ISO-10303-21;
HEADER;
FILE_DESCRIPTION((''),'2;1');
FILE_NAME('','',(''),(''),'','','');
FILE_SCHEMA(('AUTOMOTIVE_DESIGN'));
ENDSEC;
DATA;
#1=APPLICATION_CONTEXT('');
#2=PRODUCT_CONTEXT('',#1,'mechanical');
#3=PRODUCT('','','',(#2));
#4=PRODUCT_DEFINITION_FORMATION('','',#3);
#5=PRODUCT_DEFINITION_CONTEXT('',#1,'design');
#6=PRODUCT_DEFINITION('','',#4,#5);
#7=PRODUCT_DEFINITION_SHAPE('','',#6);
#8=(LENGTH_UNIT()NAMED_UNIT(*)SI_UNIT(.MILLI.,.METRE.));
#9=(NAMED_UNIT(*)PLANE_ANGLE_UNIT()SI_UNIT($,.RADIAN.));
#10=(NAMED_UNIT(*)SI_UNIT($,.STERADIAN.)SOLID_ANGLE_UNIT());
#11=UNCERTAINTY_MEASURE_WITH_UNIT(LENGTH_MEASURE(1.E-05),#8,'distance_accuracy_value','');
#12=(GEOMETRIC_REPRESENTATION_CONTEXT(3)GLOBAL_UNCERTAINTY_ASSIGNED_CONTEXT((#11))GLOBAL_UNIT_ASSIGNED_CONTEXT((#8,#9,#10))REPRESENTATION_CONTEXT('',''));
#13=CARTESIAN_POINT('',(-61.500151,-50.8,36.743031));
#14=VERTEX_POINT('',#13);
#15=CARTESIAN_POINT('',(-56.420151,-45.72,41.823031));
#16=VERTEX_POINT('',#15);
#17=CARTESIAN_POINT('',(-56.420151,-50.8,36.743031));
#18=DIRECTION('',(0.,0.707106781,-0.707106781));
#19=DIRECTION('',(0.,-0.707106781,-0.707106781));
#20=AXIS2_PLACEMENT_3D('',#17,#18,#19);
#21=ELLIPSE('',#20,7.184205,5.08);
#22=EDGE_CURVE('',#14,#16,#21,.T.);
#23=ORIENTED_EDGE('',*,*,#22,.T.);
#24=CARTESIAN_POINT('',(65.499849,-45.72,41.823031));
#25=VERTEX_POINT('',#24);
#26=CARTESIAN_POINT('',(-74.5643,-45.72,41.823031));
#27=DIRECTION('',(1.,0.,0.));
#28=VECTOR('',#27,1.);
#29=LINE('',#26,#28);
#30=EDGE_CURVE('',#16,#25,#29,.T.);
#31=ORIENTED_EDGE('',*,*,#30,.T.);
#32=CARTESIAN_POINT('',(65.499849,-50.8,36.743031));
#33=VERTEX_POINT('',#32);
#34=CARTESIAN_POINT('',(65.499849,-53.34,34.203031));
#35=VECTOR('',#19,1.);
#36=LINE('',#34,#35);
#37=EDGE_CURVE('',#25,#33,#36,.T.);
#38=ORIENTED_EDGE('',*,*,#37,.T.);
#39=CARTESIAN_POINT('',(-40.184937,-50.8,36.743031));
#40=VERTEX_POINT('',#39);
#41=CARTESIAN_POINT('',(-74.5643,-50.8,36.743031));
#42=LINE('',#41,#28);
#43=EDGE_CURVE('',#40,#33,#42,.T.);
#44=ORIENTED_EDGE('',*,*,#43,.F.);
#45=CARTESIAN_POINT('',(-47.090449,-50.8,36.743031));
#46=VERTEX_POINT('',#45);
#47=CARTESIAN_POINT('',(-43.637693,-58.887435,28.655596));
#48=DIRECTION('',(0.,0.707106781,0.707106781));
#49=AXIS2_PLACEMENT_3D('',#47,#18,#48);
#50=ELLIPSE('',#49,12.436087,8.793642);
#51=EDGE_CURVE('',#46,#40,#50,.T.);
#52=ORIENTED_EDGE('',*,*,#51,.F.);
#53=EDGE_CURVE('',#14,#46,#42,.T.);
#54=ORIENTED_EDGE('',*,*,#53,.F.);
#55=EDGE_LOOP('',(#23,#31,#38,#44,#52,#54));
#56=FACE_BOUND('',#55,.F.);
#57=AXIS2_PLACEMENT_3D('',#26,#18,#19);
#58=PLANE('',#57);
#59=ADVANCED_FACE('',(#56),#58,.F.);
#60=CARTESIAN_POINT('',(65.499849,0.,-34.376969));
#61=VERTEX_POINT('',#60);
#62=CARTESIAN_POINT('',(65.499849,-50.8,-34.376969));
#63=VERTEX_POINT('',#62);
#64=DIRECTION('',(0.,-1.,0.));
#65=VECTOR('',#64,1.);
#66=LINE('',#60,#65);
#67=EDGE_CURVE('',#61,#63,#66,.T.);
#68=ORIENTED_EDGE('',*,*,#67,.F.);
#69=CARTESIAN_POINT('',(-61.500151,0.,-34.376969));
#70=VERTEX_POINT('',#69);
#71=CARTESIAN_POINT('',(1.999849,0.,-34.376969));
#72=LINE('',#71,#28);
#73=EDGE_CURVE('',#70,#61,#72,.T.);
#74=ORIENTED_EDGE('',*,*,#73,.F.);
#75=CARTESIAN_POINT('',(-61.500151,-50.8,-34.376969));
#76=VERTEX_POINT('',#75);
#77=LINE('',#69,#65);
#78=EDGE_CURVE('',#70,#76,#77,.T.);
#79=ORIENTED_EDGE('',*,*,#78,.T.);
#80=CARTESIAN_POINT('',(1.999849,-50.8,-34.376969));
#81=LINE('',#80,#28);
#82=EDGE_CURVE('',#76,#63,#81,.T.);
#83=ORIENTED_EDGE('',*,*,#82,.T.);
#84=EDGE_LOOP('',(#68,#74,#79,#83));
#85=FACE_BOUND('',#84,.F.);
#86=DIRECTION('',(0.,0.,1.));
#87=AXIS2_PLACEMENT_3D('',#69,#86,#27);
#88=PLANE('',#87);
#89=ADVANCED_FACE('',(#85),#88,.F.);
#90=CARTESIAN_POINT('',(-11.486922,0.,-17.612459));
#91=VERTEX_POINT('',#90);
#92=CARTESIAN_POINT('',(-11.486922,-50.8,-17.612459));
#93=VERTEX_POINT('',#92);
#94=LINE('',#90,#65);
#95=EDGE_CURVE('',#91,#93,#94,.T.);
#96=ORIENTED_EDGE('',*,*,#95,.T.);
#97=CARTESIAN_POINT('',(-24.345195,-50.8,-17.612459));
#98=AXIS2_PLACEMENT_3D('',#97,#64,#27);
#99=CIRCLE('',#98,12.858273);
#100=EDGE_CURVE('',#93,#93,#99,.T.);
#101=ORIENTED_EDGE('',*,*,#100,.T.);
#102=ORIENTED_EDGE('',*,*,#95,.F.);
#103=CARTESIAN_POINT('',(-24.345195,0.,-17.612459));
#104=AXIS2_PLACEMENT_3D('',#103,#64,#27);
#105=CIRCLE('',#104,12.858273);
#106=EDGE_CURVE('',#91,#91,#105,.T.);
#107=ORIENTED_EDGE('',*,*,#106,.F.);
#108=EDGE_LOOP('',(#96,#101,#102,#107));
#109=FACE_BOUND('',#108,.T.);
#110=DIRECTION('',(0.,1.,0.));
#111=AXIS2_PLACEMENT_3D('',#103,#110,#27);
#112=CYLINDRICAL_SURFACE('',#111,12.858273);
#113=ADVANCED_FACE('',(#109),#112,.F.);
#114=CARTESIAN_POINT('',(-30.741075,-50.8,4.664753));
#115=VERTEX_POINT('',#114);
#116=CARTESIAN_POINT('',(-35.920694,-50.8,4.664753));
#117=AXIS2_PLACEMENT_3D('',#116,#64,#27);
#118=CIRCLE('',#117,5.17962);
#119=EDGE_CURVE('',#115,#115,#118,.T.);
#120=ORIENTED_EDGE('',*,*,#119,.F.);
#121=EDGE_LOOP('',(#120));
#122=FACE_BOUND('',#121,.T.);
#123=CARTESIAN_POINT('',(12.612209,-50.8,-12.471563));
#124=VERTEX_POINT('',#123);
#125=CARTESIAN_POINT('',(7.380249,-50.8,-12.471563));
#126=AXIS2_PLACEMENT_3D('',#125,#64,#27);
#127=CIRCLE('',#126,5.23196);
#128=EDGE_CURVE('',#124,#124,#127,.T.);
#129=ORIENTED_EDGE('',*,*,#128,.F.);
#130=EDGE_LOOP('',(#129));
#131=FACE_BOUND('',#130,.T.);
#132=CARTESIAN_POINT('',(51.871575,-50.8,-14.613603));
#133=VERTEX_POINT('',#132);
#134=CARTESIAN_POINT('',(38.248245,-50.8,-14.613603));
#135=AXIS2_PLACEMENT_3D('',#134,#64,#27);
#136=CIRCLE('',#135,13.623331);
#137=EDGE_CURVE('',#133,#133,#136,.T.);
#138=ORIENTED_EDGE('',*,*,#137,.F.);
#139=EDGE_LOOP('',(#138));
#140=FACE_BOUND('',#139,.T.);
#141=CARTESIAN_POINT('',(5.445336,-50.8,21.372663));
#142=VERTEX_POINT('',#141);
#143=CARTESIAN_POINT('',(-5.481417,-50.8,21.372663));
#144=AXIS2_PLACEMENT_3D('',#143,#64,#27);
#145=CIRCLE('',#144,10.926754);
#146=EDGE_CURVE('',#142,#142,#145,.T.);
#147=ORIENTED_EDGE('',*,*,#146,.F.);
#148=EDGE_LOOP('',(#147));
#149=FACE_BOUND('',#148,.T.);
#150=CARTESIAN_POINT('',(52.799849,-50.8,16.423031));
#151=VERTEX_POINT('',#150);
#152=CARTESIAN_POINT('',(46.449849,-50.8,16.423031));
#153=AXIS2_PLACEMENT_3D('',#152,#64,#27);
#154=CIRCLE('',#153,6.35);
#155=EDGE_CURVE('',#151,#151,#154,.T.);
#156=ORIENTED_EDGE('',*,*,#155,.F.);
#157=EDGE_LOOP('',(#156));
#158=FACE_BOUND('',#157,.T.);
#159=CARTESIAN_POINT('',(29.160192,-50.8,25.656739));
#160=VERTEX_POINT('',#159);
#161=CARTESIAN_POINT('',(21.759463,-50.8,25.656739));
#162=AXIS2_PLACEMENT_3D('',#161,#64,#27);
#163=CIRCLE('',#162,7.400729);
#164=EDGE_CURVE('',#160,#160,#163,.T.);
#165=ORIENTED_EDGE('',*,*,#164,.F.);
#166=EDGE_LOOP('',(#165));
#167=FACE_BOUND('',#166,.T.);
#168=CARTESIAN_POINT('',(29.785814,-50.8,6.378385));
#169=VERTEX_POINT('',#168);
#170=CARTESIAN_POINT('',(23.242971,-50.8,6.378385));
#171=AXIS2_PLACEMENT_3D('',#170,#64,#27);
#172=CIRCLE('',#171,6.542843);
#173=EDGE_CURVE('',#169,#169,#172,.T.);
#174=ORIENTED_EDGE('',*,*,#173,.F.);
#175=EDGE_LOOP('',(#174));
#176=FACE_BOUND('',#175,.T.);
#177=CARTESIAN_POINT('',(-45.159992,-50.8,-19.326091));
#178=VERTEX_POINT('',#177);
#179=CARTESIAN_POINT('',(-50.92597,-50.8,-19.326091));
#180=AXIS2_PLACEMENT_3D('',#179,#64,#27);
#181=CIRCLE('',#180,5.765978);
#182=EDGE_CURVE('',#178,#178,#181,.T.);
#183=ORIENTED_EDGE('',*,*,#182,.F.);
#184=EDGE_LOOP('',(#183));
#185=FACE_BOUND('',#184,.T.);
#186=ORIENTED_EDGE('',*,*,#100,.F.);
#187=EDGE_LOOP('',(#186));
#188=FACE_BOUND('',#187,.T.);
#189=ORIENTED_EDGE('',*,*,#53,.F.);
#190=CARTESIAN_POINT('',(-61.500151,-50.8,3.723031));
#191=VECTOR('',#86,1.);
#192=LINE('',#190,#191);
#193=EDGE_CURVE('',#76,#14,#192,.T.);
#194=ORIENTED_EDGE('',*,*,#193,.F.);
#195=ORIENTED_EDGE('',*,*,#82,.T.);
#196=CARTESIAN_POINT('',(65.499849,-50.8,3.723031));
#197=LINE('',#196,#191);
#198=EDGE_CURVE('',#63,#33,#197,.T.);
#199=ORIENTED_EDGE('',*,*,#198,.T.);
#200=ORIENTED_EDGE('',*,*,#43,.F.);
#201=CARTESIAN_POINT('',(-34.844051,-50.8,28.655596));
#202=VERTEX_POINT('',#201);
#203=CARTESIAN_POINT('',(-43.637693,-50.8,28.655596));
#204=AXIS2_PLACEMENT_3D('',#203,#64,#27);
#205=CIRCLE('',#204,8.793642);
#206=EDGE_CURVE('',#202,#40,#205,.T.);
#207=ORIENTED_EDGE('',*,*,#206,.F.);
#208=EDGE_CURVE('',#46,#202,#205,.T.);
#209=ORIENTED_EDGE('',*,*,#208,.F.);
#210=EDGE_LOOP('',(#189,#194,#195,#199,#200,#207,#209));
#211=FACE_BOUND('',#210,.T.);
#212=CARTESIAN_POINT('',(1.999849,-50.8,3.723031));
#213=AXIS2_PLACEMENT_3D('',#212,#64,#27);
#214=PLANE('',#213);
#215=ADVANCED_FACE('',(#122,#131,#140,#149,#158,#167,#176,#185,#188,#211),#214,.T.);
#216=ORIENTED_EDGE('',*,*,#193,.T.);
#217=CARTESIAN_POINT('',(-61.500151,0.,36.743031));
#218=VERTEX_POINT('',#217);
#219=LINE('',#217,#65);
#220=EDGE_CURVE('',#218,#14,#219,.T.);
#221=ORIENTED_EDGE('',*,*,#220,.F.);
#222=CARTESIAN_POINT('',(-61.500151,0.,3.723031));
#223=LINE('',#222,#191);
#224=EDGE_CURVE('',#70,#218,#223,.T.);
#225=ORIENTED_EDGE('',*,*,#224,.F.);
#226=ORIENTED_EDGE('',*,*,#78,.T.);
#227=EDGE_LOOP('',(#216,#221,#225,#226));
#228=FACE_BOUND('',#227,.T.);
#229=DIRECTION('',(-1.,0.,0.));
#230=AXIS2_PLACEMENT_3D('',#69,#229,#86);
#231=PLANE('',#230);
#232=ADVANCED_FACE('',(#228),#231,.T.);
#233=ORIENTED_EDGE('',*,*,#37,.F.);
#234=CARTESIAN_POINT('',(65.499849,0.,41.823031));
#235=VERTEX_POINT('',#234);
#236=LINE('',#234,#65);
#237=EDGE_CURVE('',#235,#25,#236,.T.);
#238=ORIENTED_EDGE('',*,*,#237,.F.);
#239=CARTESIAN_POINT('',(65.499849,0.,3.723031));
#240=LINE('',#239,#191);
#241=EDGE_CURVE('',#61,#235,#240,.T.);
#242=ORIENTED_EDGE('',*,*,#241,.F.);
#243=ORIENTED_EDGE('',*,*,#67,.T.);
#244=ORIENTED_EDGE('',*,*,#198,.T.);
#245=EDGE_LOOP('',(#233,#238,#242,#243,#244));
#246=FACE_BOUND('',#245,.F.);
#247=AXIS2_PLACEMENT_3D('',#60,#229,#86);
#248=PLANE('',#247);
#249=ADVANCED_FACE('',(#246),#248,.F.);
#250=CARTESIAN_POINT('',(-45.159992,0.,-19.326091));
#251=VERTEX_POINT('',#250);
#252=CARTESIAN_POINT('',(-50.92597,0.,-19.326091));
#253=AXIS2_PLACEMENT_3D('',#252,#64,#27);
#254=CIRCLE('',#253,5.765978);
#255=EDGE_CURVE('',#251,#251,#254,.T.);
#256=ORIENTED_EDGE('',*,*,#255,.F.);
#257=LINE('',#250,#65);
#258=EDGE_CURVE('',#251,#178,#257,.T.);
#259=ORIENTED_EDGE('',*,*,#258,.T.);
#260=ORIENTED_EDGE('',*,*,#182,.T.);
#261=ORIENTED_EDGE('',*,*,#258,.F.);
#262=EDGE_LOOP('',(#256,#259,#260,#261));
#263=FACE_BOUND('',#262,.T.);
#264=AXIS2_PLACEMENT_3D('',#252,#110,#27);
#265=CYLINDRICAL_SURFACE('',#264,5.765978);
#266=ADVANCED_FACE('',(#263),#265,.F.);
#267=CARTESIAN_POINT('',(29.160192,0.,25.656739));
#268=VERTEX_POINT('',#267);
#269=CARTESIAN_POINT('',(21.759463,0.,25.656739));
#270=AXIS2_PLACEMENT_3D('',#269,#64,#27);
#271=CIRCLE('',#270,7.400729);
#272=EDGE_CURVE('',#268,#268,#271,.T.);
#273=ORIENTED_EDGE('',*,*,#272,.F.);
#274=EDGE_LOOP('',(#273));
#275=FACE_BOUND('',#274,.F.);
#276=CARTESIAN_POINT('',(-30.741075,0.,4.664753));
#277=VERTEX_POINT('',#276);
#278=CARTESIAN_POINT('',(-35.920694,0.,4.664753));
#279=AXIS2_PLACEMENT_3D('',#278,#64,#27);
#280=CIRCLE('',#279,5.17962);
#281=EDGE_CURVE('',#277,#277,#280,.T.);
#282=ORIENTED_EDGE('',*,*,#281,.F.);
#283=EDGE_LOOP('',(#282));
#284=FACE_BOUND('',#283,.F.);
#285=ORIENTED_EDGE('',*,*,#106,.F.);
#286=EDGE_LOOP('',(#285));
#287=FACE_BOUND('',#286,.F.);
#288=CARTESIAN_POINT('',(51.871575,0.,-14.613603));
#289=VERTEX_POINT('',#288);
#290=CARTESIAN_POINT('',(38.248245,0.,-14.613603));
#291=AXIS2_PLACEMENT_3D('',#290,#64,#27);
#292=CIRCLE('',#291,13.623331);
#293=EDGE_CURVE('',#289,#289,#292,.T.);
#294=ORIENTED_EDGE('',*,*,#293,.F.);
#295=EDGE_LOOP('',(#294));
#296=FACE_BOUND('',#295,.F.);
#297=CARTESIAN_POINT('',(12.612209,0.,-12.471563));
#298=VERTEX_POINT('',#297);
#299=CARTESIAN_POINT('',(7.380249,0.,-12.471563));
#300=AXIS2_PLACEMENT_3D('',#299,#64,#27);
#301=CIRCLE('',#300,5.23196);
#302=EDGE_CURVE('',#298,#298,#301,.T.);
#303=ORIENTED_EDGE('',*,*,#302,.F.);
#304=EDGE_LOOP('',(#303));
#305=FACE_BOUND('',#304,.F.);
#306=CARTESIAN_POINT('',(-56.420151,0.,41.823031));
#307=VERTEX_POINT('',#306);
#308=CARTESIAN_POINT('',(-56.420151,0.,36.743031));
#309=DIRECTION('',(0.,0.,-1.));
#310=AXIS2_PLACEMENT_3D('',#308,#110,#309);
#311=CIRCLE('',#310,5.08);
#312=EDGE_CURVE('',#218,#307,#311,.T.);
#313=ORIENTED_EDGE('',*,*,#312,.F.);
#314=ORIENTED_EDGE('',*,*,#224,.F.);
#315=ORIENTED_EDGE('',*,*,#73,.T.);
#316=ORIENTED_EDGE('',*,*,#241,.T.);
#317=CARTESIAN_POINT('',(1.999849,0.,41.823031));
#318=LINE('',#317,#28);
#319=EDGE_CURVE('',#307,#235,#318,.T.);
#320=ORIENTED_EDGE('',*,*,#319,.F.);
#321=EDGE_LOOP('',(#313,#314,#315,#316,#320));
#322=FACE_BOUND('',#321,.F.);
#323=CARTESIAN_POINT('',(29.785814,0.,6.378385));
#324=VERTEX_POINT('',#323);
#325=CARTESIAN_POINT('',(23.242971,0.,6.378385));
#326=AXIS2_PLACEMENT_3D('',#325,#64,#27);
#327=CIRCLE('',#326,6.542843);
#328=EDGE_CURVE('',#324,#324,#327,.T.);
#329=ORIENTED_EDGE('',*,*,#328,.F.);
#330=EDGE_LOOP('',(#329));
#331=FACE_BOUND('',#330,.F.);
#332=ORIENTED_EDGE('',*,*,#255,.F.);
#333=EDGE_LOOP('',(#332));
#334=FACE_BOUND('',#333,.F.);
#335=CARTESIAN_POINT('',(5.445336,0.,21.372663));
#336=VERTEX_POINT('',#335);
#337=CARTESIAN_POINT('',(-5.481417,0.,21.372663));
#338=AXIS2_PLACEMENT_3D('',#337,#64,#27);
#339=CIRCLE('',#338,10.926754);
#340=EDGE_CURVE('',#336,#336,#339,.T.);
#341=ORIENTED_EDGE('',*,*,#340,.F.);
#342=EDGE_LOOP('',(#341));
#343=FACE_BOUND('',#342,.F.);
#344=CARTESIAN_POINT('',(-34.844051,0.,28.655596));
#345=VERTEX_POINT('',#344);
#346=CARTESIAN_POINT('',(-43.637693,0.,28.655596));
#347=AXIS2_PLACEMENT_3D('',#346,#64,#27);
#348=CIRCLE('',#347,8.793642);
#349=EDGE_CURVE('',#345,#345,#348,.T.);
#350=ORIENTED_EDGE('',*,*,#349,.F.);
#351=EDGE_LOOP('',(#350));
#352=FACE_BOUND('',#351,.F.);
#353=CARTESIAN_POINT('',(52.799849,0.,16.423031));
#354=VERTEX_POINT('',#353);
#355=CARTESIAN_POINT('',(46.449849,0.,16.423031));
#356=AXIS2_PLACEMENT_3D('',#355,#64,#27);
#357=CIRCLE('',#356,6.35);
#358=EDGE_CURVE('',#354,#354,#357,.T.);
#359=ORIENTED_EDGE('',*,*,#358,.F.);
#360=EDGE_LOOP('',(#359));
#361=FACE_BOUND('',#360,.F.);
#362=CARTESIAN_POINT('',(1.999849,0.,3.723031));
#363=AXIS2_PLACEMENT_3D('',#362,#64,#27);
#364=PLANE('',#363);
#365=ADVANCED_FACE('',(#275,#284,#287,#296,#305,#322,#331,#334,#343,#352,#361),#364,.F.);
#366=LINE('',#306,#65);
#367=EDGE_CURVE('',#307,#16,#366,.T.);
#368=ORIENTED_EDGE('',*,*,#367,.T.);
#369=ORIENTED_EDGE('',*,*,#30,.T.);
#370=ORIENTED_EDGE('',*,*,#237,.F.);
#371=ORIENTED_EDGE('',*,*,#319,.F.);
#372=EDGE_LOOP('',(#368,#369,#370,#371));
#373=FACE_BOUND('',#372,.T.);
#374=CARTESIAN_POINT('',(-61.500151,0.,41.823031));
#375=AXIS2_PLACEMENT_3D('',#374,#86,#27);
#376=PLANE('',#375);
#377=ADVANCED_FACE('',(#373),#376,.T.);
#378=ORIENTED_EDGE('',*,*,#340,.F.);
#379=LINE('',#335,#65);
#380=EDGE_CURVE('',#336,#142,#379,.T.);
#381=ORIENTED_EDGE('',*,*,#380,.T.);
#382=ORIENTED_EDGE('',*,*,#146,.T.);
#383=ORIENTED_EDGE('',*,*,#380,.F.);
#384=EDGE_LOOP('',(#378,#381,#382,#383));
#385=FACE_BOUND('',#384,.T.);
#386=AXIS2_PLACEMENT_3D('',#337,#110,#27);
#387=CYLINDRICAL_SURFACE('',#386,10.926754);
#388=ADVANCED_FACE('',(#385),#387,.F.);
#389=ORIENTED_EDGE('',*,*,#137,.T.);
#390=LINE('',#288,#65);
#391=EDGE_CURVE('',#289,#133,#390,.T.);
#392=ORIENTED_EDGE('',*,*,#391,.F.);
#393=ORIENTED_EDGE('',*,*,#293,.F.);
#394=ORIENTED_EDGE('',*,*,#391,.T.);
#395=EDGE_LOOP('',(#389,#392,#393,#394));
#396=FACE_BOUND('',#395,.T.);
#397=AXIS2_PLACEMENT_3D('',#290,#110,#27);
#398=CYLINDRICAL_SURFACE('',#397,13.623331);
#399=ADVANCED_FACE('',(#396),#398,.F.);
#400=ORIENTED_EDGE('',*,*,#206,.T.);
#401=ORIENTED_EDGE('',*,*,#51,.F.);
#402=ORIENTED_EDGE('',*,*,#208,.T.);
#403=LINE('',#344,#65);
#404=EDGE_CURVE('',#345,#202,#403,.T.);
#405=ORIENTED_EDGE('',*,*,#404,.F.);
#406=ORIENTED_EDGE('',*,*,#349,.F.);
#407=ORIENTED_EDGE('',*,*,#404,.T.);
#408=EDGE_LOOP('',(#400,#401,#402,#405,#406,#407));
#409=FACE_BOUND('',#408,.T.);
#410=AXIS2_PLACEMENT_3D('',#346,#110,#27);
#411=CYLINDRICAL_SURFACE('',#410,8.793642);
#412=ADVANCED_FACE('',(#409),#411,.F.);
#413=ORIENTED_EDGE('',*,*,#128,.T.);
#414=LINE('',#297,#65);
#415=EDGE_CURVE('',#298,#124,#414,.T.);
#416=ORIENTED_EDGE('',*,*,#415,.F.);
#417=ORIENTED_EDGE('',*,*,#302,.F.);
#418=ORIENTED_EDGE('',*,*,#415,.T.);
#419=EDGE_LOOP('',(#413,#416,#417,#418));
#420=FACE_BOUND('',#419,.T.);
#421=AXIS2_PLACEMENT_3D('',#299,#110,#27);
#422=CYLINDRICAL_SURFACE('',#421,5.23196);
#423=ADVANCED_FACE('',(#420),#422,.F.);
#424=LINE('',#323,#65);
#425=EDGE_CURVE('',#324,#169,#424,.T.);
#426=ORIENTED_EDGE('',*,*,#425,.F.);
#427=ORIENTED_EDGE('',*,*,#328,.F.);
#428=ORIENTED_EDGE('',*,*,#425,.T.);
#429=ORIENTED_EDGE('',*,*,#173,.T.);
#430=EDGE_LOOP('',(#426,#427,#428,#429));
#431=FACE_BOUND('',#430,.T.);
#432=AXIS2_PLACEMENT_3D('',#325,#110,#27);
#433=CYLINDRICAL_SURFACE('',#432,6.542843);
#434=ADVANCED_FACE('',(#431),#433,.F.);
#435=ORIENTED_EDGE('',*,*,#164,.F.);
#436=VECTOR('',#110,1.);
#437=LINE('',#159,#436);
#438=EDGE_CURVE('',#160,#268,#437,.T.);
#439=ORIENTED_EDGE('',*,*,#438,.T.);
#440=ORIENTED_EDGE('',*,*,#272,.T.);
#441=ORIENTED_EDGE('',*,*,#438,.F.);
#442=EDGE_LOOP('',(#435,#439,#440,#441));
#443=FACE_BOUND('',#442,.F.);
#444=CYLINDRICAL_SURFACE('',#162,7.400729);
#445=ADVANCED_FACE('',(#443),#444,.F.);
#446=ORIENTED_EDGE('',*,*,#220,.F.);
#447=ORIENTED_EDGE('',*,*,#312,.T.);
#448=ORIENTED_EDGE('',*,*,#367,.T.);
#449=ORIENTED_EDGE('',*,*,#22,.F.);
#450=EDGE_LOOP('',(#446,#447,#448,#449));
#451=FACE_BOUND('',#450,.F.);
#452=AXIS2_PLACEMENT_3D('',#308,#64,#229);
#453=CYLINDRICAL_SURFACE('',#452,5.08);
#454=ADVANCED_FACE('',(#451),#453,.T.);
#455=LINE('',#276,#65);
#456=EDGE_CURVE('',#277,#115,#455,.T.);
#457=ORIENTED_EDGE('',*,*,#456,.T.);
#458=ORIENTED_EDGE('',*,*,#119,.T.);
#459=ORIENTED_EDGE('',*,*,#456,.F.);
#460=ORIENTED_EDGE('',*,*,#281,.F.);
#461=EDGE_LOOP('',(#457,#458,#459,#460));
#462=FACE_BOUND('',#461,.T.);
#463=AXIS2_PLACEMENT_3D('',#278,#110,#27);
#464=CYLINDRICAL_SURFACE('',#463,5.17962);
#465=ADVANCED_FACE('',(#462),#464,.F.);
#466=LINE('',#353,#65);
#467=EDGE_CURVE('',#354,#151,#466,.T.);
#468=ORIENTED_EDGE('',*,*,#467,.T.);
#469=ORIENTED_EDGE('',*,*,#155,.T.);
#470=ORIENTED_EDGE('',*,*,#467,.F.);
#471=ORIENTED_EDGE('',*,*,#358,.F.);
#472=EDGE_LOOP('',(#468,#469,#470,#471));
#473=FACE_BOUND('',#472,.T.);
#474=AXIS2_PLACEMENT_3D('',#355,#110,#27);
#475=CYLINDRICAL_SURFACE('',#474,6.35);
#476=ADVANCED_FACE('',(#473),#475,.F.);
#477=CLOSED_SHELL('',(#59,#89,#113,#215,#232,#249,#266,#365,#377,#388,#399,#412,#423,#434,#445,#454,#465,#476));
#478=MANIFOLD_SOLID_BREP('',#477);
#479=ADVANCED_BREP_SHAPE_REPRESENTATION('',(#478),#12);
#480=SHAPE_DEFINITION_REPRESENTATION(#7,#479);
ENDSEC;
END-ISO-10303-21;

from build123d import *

# Parameters (mm, degrees)
F0_W        = 127
F0_H        = 76.2
F0_R        = 5.7659781113
F0_R_2      = 12.8582731401
F0_R_3      = 5.2319601114
F0_R_4      = 13.6233305285
F0_R_5      = 5.1796195503
F0_R_6      = 10.9267536549
F0_R_7      = 8.7936415442
F0_R_8      = 6.5428428961
F0_R_9      = 6.35
F1_DEPTH    = 50.8
F2_R        = 7.4007288491
F3_DEPTH    = 51.054
F4_T1_DEPTH = 153.1282991577
F5_R        = 5.08


# Not quite as in the source:
# - a fillet or chamfer that OpenCascade refuses, or shapes differently, is made with other operations: its cross-section is extruded or revolved along the edge and cut away or added


with BuildPart() as f1:
    # F0 (on Front) → F1 (new body)
    with BuildSketch(Plane.XZ):
        with Locations((1.9998494536, 3.723031328)):
            Rectangle(F0_W, F0_H)
        with Locations((-50.9259700775, -19.3260908127)):
            Circle(F0_R, mode=Mode.SUBTRACT)
        with Locations((-24.3451949209, -17.612459138)):
            Circle(F0_R_2, mode=Mode.SUBTRACT)
        with Locations((7.3802489787, -12.4715631828)):
            Circle(F0_R_3, mode=Mode.SUBTRACT)
        with Locations((38.248244673, -14.6136032417)):
            Circle(F0_R_4, mode=Mode.SUBTRACT)
        with Locations((-35.9206944704, 4.664753098)):
            Circle(F0_R_5, mode=Mode.SUBTRACT)
        with Locations((-5.4814172909, 21.3726628572)):
            Circle(F0_R_6, mode=Mode.SUBTRACT)
        with Locations((-43.6376929283, 28.6555960774)):
            Circle(F0_R_7, mode=Mode.SUBTRACT)
        with Locations((23.2429709285, 6.3783847727)):
            Circle(F0_R_8, mode=Mode.SUBTRACT)
        with Locations((46.4498494536, 16.423031328)):
            Circle(F0_R_9, mode=Mode.SUBTRACT)
    extrude(amount=F1_DEPTH)

    # F2 (on face) → F3 (cut)
    with BuildSketch(Plane.XZ.offset(50.8)):
        with Locations((21.7594634742, 25.6567392498)):
            Circle(F2_R)
    extrude(amount=-F3_DEPTH, mode=Mode.SUBTRACT)

    # F4: chamfer of 5.08 on 1 edges, made by hand

    # F4_s2 → F4_t1 (cut)
    with BuildSketch(Plane.YZ.offset(-74.5643001253)):
        Polygon((-45.72, 41.823031328), (-50.8, 36.743031328), (-50.8, 41.823031328), align=None)
    extrude(amount=F4_T1_DEPTH, mode=Mode.SUBTRACT)

    # F5
    f5_edges = [f1.edges().sort_by_distance(p)[0] for p in [
        (-61.500151, -22.86, 41.823031),
    ]]
    fillet(f5_edges, radius=F5_R)


solid = f1.part
